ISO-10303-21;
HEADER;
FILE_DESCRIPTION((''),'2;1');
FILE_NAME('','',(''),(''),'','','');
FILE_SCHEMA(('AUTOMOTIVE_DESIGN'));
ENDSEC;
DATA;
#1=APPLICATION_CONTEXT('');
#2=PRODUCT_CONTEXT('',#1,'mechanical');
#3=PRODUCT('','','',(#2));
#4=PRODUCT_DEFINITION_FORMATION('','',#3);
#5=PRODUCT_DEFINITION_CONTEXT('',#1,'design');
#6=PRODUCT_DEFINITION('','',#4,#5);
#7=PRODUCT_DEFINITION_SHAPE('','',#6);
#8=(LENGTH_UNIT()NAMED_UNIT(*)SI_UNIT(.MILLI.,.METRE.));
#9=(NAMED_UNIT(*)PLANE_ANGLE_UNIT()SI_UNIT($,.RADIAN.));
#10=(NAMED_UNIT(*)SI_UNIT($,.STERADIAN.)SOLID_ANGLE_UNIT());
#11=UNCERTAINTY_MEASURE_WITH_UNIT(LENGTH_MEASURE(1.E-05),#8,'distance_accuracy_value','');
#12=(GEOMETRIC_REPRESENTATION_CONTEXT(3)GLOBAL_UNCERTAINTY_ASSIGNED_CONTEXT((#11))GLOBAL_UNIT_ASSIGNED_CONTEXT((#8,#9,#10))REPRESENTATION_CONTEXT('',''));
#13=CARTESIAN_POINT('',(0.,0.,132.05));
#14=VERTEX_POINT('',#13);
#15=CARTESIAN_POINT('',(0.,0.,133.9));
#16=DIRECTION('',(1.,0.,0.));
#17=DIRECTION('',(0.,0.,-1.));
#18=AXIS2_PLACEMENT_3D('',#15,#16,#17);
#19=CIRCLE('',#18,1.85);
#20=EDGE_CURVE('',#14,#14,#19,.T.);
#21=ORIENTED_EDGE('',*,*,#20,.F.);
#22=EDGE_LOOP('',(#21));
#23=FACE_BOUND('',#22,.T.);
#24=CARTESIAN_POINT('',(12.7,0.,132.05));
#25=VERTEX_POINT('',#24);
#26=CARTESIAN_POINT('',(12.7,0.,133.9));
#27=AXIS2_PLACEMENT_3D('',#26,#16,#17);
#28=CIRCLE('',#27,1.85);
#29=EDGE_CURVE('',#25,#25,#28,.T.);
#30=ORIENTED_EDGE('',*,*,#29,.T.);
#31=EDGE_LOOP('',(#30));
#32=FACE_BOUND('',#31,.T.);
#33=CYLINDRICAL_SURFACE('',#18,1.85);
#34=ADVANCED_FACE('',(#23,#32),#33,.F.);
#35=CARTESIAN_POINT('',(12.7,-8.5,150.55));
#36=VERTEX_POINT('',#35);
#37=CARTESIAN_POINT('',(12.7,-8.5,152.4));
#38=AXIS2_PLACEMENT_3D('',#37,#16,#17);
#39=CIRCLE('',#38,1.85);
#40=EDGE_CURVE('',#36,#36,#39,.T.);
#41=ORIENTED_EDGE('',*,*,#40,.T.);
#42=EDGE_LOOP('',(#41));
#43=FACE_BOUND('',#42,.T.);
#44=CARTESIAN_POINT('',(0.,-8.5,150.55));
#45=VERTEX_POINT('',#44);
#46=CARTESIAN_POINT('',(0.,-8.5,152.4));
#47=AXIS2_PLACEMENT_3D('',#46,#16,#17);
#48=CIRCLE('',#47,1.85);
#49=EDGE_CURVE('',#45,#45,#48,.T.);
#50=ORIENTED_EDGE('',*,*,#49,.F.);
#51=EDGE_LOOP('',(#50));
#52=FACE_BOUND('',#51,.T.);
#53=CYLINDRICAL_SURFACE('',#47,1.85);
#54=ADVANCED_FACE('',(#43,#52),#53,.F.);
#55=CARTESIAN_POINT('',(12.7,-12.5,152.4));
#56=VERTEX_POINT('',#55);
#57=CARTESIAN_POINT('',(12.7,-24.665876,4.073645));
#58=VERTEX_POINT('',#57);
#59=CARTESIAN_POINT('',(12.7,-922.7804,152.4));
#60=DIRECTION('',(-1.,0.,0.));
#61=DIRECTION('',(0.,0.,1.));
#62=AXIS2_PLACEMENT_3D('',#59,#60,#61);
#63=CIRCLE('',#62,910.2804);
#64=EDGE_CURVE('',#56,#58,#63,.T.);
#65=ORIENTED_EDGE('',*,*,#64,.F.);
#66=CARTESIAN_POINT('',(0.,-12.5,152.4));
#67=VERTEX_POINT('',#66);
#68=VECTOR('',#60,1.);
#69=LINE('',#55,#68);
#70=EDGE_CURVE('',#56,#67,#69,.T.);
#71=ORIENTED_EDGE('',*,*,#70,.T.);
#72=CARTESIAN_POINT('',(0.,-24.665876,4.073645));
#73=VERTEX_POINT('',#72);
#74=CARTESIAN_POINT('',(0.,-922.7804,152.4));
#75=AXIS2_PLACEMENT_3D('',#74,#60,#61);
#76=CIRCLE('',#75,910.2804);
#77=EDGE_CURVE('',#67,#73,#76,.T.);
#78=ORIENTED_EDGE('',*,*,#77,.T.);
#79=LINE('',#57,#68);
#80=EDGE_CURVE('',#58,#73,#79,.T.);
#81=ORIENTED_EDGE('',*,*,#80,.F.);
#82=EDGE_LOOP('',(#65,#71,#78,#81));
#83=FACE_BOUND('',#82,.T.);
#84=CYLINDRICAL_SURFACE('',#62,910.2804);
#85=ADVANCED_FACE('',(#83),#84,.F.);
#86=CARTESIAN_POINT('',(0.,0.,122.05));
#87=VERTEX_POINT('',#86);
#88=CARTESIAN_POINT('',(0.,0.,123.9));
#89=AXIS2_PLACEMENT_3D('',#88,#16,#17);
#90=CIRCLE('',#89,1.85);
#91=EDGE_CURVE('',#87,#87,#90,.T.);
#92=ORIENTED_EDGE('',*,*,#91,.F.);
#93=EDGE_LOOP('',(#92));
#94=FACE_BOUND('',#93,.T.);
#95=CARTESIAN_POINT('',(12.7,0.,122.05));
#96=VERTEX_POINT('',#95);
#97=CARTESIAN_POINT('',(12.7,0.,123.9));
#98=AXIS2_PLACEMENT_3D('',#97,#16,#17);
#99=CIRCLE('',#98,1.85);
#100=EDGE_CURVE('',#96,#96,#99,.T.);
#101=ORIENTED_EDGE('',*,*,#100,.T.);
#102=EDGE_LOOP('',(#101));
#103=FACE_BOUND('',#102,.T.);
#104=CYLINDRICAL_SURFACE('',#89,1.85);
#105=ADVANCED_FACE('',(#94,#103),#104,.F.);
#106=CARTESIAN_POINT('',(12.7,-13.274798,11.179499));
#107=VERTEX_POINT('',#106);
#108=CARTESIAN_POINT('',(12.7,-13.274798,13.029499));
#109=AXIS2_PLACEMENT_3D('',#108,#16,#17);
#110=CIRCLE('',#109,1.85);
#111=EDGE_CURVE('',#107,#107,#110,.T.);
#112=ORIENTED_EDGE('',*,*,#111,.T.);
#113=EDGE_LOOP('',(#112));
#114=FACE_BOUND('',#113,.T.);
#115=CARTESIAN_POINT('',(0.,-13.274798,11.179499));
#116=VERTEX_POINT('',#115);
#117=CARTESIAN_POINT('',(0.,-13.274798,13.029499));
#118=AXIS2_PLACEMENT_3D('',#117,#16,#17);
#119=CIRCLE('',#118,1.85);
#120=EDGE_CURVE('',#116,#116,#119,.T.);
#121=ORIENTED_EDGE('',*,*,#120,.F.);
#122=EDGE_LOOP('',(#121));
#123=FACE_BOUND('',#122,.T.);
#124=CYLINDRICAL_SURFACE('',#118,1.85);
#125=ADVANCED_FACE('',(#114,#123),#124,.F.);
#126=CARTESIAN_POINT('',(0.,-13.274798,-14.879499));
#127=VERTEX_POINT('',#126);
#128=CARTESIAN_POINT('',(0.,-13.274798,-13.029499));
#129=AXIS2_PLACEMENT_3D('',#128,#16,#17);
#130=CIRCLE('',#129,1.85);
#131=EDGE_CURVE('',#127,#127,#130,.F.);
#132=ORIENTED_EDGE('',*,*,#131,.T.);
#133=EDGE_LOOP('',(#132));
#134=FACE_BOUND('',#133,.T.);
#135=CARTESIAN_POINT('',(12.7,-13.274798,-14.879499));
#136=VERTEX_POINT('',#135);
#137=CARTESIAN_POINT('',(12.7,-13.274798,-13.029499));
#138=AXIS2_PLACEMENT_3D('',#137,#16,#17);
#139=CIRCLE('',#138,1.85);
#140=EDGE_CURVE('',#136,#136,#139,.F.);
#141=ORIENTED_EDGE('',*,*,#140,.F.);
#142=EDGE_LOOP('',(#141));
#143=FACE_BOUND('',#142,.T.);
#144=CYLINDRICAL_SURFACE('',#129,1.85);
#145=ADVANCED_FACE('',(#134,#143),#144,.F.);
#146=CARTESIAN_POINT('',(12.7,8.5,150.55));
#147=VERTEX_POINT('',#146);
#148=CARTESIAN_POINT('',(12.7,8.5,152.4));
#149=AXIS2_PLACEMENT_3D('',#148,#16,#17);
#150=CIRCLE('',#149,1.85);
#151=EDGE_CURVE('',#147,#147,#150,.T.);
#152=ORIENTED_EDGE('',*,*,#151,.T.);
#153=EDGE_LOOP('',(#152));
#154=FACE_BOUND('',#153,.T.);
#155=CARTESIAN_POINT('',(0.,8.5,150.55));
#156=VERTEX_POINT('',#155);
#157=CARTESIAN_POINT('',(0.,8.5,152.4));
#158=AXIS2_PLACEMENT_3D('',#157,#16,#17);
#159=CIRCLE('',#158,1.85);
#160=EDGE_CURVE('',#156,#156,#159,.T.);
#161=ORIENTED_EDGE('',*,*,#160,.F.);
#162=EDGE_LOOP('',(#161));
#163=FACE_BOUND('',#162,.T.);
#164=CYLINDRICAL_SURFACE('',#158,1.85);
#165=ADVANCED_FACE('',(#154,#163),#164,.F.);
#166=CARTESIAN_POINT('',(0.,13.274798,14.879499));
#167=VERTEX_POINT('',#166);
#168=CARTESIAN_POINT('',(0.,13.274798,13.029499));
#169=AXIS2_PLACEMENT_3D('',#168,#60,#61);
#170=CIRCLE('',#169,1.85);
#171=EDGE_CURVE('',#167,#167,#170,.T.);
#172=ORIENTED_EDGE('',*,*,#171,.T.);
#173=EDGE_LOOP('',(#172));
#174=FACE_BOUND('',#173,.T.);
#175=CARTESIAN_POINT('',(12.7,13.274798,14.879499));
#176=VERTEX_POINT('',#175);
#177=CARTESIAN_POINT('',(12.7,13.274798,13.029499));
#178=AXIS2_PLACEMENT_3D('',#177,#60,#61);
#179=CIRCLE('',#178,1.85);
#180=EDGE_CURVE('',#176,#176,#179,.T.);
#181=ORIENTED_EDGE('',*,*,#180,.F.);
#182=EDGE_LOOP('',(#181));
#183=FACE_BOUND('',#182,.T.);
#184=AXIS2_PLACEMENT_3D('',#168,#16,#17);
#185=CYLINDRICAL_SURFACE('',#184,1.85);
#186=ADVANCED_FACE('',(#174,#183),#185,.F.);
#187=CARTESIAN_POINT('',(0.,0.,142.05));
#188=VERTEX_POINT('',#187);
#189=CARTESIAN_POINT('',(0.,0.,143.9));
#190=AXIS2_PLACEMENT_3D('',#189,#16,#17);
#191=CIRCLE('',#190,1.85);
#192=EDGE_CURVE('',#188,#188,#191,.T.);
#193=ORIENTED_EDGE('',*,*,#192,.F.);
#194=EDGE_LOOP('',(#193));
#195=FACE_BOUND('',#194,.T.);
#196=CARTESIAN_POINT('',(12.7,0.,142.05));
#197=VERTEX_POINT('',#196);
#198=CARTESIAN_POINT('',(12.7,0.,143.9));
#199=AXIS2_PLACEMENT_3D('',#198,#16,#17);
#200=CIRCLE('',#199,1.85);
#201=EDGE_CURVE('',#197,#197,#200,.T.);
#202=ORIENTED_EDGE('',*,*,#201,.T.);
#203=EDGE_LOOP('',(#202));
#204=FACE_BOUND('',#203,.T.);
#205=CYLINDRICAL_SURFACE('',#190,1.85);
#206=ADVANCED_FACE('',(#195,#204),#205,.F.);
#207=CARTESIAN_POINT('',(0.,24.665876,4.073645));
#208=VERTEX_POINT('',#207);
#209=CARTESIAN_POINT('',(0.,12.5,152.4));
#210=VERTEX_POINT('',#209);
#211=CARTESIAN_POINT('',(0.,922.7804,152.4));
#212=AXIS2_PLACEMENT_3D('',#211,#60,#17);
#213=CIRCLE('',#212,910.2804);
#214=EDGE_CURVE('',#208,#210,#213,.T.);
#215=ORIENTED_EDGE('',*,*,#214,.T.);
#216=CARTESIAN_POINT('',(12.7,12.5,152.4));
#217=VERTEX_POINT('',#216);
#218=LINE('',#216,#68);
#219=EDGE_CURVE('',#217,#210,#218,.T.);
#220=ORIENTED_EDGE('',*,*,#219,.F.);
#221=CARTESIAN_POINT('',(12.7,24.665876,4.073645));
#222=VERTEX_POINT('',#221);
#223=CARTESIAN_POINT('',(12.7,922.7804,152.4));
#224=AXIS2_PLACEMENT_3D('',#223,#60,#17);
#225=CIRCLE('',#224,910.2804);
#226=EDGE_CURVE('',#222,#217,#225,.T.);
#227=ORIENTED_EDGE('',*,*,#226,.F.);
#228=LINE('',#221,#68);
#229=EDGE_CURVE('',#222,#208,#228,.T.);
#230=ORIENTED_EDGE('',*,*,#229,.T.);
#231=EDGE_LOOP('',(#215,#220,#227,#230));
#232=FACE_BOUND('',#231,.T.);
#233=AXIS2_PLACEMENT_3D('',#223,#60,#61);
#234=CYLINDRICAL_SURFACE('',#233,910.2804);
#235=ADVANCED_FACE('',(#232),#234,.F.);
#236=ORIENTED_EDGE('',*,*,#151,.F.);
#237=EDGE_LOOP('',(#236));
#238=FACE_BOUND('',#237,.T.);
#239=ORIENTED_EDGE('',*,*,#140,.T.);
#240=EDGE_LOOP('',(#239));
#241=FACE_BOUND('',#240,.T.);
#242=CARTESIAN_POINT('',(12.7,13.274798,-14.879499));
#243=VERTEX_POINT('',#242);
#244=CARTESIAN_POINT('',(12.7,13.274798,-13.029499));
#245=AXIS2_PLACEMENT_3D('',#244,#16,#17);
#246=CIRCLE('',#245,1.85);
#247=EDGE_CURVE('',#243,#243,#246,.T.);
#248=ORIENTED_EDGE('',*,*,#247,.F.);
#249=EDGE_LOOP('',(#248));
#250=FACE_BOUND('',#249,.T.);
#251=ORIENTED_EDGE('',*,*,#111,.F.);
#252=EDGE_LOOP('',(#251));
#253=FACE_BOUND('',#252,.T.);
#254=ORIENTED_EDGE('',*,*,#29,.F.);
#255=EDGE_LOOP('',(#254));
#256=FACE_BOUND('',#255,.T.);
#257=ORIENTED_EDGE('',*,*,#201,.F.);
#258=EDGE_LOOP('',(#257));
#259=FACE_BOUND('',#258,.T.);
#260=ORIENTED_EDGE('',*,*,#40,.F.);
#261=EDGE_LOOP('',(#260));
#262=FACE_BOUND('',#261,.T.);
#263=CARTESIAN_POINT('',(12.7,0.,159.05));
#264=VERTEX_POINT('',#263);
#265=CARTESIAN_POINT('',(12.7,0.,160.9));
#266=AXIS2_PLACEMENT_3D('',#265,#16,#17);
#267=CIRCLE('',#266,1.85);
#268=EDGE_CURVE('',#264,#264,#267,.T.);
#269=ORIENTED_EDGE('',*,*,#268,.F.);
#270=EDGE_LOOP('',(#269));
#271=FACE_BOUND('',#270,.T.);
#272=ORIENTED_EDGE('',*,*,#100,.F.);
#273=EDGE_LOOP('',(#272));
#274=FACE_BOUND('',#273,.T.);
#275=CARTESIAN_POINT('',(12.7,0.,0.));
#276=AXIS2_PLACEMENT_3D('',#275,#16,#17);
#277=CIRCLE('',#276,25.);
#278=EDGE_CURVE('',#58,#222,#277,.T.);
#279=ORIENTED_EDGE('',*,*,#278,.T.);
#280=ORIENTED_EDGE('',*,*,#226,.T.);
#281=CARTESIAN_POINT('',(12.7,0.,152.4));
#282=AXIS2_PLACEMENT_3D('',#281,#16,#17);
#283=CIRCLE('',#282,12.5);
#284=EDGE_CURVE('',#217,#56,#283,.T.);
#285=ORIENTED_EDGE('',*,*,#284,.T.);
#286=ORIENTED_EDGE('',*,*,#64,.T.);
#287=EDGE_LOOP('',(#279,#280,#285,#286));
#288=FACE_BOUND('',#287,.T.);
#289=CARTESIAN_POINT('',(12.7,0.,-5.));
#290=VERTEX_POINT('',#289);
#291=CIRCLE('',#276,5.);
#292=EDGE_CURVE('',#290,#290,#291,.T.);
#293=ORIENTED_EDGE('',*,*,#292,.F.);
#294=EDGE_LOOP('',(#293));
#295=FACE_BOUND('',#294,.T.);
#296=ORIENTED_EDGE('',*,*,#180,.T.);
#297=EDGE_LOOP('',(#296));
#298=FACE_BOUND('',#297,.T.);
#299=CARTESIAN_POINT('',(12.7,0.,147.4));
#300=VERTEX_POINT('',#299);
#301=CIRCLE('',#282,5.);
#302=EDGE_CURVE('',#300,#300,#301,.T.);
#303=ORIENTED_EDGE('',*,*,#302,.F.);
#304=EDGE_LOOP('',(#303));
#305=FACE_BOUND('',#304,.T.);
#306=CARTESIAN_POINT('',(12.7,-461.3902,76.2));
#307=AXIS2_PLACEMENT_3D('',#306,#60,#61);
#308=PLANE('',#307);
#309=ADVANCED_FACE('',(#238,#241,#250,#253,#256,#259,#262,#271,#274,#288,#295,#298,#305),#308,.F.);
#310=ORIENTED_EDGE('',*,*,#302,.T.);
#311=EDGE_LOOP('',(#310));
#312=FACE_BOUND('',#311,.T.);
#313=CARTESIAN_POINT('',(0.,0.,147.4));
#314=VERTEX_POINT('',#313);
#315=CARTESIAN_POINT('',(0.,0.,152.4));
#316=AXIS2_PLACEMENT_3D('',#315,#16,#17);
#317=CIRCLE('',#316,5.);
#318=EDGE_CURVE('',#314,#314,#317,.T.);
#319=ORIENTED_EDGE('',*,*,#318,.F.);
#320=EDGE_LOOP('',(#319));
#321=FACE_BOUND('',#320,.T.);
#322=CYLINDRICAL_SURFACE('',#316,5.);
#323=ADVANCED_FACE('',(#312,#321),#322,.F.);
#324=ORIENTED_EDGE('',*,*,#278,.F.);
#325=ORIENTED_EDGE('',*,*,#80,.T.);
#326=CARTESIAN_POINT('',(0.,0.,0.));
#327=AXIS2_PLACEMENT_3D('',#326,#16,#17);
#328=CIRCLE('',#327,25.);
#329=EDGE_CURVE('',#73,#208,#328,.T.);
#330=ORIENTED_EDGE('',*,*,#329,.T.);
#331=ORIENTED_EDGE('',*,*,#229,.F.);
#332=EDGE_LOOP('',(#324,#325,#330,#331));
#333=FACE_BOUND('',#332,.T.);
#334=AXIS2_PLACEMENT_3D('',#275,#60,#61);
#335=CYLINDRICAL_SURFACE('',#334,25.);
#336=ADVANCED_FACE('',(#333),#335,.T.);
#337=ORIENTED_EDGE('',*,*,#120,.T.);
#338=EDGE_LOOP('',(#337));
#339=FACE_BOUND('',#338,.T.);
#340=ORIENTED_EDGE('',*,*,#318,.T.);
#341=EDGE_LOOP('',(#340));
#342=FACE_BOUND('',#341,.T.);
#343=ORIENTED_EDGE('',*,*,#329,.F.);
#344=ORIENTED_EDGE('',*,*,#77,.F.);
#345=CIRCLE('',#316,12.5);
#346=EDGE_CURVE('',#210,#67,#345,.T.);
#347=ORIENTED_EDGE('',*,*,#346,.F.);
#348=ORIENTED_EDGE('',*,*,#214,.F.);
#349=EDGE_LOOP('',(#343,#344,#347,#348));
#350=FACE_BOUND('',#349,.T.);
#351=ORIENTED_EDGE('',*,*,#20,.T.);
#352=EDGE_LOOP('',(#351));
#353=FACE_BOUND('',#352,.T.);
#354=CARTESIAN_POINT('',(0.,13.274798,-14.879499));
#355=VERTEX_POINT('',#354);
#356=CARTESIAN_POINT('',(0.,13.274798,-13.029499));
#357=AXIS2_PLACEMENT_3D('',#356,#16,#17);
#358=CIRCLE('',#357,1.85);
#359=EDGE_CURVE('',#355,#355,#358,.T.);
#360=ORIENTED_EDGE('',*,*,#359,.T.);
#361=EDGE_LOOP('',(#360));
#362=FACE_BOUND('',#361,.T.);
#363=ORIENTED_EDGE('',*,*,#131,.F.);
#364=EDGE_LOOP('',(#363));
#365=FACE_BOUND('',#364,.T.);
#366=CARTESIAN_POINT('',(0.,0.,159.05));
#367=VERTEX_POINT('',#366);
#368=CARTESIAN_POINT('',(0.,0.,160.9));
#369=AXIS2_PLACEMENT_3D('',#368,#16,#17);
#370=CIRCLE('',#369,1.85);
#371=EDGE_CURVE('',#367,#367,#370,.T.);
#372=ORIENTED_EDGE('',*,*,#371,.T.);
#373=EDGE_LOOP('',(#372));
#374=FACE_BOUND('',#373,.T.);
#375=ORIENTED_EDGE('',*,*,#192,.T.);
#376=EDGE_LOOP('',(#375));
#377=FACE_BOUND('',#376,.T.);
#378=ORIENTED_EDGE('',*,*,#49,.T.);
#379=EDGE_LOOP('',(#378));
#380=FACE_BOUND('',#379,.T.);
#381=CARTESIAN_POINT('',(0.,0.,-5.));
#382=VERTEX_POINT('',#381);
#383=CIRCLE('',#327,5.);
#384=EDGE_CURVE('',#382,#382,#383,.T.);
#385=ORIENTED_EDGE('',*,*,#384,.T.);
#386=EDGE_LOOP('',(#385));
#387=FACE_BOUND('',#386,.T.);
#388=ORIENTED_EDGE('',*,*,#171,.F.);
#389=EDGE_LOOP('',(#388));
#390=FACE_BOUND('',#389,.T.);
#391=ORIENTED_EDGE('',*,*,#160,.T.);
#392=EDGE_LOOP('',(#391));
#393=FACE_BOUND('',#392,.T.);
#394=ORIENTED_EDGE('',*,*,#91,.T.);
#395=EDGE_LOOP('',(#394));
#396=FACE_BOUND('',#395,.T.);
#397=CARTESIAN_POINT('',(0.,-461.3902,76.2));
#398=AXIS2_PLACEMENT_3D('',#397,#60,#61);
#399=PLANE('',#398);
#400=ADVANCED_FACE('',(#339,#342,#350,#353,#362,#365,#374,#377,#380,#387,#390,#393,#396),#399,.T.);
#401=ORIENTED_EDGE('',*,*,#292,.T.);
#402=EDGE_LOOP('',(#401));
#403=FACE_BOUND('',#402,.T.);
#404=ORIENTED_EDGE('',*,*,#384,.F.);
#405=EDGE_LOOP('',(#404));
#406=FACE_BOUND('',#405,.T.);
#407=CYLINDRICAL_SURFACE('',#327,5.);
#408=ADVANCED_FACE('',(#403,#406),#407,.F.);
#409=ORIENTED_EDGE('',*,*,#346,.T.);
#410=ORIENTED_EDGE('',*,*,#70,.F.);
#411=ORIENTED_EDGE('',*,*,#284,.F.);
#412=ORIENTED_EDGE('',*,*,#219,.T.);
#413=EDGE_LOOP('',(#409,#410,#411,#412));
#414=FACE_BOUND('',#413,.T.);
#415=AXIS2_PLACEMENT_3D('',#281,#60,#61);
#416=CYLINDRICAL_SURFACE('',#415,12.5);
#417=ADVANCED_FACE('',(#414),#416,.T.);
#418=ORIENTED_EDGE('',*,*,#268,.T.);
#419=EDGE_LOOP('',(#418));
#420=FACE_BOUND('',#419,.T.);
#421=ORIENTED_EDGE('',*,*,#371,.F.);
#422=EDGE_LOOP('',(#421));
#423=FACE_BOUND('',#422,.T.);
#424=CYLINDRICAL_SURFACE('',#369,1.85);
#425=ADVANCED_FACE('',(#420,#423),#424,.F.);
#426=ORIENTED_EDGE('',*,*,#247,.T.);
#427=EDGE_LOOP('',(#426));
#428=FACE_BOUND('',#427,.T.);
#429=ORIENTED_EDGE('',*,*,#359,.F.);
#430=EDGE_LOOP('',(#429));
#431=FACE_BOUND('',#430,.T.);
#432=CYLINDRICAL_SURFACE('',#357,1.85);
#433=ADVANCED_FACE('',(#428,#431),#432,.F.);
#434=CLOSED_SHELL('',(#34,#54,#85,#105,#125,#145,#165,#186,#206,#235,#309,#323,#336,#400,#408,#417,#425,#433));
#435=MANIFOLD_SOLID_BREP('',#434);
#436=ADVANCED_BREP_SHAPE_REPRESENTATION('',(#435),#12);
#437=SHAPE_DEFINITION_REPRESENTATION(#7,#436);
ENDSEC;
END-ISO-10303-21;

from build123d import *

# Parameters (mm, degrees)
BOSS_EXTRUDE1_DEPTH      = 12.7
CUT_EXTRUDE1_START       = -12.7
CUT_EXTRUDE1_OUTLINE_R   = 5
CUT_EXTRUDE1_OUTLINE_R_2 = 1.85
CUT_EXTRUDE1_DEPTH       = 12.7
SKETCH5_R                = 5
SKETCH5_R_2              = 1.85
CUT_EXTRUDE2_DEPTH       = 168.267151587


# Read off the part's stored shape, not the designer's step: Cut-Extrude1
with BuildPart() as part:
    # Sketch1 → Boss-Extrude1 (new body)
    with BuildSketch(Plane(origin=(0, 0, 0), x_dir=(0, 0, -1), z_dir=(1, 0, 0))):
        with BuildLine():
            ThreePointArc((-4.073644652, -24.665875603), (25, 0), (-4.073644652, 24.665875603))
            ThreePointArc((-4.073644652, 24.665875603), (-77.987776172, 15.546567094), (-152.4, 12.5))
            ThreePointArc((-152.4, 12.5), (-164.9, 0), (-152.4, -12.5))
            ThreePointArc((-152.4, -12.5), (-77.987776172, -15.546567094), (-4.073644652, -24.665875603))
        make_face()
    extrude(amount=BOSS_EXTRUDE1_DEPTH)

    # Cut-Extrude1 outline → Cut-Extrude1 (cut)
    with BuildSketch(Plane(origin=(12.7, 0, 0), x_dir=(0, 0, -1), z_dir=(1, 0, 0)).offset(CUT_EXTRUDE1_START)):
        Circle(CUT_EXTRUDE1_OUTLINE_R)
        with Locations((13.029498672, 13.274798425)):
            Circle(CUT_EXTRUDE1_OUTLINE_R_2)
        with Locations((13.029498672, -13.274798425)):
            Circle(CUT_EXTRUDE1_OUTLINE_R_2)
        with Locations((-13.029498672, -13.274798425)):
            Circle(CUT_EXTRUDE1_OUTLINE_R_2)
        with Locations((-13.029498672, 13.274798425)):
            Circle(CUT_EXTRUDE1_OUTLINE_R_2)
    extrude(amount=CUT_EXTRUDE1_DEPTH, mode=Mode.SUBTRACT)

    # Sketch5 → Cut-Extrude2 (cut, through all)
    with BuildSketch(Plane(origin=(12.7, 0, 0), x_dir=(0, 0, -1), z_dir=(1, 0, 0))):
        with Locations((-152.4, 0)):
            Circle(SKETCH5_R)
        with Locations((-143.9, 0)):
            Circle(SKETCH5_R_2)
        with Locations((-152.4, -8.5)):
            Circle(SKETCH5_R_2)
        with Locations((-160.9, 0)):
            Circle(SKETCH5_R_2)
        with Locations((-152.4, 8.5)):
            Circle(SKETCH5_R_2)
        with Locations((-133.9, 0)):
            Circle(SKETCH5_R_2)
        with Locations((-123.9, 0)):
            Circle(SKETCH5_R_2)
    extrude(amount=-CUT_EXTRUDE2_DEPTH, mode=Mode.SUBTRACT)


solid = part.part
